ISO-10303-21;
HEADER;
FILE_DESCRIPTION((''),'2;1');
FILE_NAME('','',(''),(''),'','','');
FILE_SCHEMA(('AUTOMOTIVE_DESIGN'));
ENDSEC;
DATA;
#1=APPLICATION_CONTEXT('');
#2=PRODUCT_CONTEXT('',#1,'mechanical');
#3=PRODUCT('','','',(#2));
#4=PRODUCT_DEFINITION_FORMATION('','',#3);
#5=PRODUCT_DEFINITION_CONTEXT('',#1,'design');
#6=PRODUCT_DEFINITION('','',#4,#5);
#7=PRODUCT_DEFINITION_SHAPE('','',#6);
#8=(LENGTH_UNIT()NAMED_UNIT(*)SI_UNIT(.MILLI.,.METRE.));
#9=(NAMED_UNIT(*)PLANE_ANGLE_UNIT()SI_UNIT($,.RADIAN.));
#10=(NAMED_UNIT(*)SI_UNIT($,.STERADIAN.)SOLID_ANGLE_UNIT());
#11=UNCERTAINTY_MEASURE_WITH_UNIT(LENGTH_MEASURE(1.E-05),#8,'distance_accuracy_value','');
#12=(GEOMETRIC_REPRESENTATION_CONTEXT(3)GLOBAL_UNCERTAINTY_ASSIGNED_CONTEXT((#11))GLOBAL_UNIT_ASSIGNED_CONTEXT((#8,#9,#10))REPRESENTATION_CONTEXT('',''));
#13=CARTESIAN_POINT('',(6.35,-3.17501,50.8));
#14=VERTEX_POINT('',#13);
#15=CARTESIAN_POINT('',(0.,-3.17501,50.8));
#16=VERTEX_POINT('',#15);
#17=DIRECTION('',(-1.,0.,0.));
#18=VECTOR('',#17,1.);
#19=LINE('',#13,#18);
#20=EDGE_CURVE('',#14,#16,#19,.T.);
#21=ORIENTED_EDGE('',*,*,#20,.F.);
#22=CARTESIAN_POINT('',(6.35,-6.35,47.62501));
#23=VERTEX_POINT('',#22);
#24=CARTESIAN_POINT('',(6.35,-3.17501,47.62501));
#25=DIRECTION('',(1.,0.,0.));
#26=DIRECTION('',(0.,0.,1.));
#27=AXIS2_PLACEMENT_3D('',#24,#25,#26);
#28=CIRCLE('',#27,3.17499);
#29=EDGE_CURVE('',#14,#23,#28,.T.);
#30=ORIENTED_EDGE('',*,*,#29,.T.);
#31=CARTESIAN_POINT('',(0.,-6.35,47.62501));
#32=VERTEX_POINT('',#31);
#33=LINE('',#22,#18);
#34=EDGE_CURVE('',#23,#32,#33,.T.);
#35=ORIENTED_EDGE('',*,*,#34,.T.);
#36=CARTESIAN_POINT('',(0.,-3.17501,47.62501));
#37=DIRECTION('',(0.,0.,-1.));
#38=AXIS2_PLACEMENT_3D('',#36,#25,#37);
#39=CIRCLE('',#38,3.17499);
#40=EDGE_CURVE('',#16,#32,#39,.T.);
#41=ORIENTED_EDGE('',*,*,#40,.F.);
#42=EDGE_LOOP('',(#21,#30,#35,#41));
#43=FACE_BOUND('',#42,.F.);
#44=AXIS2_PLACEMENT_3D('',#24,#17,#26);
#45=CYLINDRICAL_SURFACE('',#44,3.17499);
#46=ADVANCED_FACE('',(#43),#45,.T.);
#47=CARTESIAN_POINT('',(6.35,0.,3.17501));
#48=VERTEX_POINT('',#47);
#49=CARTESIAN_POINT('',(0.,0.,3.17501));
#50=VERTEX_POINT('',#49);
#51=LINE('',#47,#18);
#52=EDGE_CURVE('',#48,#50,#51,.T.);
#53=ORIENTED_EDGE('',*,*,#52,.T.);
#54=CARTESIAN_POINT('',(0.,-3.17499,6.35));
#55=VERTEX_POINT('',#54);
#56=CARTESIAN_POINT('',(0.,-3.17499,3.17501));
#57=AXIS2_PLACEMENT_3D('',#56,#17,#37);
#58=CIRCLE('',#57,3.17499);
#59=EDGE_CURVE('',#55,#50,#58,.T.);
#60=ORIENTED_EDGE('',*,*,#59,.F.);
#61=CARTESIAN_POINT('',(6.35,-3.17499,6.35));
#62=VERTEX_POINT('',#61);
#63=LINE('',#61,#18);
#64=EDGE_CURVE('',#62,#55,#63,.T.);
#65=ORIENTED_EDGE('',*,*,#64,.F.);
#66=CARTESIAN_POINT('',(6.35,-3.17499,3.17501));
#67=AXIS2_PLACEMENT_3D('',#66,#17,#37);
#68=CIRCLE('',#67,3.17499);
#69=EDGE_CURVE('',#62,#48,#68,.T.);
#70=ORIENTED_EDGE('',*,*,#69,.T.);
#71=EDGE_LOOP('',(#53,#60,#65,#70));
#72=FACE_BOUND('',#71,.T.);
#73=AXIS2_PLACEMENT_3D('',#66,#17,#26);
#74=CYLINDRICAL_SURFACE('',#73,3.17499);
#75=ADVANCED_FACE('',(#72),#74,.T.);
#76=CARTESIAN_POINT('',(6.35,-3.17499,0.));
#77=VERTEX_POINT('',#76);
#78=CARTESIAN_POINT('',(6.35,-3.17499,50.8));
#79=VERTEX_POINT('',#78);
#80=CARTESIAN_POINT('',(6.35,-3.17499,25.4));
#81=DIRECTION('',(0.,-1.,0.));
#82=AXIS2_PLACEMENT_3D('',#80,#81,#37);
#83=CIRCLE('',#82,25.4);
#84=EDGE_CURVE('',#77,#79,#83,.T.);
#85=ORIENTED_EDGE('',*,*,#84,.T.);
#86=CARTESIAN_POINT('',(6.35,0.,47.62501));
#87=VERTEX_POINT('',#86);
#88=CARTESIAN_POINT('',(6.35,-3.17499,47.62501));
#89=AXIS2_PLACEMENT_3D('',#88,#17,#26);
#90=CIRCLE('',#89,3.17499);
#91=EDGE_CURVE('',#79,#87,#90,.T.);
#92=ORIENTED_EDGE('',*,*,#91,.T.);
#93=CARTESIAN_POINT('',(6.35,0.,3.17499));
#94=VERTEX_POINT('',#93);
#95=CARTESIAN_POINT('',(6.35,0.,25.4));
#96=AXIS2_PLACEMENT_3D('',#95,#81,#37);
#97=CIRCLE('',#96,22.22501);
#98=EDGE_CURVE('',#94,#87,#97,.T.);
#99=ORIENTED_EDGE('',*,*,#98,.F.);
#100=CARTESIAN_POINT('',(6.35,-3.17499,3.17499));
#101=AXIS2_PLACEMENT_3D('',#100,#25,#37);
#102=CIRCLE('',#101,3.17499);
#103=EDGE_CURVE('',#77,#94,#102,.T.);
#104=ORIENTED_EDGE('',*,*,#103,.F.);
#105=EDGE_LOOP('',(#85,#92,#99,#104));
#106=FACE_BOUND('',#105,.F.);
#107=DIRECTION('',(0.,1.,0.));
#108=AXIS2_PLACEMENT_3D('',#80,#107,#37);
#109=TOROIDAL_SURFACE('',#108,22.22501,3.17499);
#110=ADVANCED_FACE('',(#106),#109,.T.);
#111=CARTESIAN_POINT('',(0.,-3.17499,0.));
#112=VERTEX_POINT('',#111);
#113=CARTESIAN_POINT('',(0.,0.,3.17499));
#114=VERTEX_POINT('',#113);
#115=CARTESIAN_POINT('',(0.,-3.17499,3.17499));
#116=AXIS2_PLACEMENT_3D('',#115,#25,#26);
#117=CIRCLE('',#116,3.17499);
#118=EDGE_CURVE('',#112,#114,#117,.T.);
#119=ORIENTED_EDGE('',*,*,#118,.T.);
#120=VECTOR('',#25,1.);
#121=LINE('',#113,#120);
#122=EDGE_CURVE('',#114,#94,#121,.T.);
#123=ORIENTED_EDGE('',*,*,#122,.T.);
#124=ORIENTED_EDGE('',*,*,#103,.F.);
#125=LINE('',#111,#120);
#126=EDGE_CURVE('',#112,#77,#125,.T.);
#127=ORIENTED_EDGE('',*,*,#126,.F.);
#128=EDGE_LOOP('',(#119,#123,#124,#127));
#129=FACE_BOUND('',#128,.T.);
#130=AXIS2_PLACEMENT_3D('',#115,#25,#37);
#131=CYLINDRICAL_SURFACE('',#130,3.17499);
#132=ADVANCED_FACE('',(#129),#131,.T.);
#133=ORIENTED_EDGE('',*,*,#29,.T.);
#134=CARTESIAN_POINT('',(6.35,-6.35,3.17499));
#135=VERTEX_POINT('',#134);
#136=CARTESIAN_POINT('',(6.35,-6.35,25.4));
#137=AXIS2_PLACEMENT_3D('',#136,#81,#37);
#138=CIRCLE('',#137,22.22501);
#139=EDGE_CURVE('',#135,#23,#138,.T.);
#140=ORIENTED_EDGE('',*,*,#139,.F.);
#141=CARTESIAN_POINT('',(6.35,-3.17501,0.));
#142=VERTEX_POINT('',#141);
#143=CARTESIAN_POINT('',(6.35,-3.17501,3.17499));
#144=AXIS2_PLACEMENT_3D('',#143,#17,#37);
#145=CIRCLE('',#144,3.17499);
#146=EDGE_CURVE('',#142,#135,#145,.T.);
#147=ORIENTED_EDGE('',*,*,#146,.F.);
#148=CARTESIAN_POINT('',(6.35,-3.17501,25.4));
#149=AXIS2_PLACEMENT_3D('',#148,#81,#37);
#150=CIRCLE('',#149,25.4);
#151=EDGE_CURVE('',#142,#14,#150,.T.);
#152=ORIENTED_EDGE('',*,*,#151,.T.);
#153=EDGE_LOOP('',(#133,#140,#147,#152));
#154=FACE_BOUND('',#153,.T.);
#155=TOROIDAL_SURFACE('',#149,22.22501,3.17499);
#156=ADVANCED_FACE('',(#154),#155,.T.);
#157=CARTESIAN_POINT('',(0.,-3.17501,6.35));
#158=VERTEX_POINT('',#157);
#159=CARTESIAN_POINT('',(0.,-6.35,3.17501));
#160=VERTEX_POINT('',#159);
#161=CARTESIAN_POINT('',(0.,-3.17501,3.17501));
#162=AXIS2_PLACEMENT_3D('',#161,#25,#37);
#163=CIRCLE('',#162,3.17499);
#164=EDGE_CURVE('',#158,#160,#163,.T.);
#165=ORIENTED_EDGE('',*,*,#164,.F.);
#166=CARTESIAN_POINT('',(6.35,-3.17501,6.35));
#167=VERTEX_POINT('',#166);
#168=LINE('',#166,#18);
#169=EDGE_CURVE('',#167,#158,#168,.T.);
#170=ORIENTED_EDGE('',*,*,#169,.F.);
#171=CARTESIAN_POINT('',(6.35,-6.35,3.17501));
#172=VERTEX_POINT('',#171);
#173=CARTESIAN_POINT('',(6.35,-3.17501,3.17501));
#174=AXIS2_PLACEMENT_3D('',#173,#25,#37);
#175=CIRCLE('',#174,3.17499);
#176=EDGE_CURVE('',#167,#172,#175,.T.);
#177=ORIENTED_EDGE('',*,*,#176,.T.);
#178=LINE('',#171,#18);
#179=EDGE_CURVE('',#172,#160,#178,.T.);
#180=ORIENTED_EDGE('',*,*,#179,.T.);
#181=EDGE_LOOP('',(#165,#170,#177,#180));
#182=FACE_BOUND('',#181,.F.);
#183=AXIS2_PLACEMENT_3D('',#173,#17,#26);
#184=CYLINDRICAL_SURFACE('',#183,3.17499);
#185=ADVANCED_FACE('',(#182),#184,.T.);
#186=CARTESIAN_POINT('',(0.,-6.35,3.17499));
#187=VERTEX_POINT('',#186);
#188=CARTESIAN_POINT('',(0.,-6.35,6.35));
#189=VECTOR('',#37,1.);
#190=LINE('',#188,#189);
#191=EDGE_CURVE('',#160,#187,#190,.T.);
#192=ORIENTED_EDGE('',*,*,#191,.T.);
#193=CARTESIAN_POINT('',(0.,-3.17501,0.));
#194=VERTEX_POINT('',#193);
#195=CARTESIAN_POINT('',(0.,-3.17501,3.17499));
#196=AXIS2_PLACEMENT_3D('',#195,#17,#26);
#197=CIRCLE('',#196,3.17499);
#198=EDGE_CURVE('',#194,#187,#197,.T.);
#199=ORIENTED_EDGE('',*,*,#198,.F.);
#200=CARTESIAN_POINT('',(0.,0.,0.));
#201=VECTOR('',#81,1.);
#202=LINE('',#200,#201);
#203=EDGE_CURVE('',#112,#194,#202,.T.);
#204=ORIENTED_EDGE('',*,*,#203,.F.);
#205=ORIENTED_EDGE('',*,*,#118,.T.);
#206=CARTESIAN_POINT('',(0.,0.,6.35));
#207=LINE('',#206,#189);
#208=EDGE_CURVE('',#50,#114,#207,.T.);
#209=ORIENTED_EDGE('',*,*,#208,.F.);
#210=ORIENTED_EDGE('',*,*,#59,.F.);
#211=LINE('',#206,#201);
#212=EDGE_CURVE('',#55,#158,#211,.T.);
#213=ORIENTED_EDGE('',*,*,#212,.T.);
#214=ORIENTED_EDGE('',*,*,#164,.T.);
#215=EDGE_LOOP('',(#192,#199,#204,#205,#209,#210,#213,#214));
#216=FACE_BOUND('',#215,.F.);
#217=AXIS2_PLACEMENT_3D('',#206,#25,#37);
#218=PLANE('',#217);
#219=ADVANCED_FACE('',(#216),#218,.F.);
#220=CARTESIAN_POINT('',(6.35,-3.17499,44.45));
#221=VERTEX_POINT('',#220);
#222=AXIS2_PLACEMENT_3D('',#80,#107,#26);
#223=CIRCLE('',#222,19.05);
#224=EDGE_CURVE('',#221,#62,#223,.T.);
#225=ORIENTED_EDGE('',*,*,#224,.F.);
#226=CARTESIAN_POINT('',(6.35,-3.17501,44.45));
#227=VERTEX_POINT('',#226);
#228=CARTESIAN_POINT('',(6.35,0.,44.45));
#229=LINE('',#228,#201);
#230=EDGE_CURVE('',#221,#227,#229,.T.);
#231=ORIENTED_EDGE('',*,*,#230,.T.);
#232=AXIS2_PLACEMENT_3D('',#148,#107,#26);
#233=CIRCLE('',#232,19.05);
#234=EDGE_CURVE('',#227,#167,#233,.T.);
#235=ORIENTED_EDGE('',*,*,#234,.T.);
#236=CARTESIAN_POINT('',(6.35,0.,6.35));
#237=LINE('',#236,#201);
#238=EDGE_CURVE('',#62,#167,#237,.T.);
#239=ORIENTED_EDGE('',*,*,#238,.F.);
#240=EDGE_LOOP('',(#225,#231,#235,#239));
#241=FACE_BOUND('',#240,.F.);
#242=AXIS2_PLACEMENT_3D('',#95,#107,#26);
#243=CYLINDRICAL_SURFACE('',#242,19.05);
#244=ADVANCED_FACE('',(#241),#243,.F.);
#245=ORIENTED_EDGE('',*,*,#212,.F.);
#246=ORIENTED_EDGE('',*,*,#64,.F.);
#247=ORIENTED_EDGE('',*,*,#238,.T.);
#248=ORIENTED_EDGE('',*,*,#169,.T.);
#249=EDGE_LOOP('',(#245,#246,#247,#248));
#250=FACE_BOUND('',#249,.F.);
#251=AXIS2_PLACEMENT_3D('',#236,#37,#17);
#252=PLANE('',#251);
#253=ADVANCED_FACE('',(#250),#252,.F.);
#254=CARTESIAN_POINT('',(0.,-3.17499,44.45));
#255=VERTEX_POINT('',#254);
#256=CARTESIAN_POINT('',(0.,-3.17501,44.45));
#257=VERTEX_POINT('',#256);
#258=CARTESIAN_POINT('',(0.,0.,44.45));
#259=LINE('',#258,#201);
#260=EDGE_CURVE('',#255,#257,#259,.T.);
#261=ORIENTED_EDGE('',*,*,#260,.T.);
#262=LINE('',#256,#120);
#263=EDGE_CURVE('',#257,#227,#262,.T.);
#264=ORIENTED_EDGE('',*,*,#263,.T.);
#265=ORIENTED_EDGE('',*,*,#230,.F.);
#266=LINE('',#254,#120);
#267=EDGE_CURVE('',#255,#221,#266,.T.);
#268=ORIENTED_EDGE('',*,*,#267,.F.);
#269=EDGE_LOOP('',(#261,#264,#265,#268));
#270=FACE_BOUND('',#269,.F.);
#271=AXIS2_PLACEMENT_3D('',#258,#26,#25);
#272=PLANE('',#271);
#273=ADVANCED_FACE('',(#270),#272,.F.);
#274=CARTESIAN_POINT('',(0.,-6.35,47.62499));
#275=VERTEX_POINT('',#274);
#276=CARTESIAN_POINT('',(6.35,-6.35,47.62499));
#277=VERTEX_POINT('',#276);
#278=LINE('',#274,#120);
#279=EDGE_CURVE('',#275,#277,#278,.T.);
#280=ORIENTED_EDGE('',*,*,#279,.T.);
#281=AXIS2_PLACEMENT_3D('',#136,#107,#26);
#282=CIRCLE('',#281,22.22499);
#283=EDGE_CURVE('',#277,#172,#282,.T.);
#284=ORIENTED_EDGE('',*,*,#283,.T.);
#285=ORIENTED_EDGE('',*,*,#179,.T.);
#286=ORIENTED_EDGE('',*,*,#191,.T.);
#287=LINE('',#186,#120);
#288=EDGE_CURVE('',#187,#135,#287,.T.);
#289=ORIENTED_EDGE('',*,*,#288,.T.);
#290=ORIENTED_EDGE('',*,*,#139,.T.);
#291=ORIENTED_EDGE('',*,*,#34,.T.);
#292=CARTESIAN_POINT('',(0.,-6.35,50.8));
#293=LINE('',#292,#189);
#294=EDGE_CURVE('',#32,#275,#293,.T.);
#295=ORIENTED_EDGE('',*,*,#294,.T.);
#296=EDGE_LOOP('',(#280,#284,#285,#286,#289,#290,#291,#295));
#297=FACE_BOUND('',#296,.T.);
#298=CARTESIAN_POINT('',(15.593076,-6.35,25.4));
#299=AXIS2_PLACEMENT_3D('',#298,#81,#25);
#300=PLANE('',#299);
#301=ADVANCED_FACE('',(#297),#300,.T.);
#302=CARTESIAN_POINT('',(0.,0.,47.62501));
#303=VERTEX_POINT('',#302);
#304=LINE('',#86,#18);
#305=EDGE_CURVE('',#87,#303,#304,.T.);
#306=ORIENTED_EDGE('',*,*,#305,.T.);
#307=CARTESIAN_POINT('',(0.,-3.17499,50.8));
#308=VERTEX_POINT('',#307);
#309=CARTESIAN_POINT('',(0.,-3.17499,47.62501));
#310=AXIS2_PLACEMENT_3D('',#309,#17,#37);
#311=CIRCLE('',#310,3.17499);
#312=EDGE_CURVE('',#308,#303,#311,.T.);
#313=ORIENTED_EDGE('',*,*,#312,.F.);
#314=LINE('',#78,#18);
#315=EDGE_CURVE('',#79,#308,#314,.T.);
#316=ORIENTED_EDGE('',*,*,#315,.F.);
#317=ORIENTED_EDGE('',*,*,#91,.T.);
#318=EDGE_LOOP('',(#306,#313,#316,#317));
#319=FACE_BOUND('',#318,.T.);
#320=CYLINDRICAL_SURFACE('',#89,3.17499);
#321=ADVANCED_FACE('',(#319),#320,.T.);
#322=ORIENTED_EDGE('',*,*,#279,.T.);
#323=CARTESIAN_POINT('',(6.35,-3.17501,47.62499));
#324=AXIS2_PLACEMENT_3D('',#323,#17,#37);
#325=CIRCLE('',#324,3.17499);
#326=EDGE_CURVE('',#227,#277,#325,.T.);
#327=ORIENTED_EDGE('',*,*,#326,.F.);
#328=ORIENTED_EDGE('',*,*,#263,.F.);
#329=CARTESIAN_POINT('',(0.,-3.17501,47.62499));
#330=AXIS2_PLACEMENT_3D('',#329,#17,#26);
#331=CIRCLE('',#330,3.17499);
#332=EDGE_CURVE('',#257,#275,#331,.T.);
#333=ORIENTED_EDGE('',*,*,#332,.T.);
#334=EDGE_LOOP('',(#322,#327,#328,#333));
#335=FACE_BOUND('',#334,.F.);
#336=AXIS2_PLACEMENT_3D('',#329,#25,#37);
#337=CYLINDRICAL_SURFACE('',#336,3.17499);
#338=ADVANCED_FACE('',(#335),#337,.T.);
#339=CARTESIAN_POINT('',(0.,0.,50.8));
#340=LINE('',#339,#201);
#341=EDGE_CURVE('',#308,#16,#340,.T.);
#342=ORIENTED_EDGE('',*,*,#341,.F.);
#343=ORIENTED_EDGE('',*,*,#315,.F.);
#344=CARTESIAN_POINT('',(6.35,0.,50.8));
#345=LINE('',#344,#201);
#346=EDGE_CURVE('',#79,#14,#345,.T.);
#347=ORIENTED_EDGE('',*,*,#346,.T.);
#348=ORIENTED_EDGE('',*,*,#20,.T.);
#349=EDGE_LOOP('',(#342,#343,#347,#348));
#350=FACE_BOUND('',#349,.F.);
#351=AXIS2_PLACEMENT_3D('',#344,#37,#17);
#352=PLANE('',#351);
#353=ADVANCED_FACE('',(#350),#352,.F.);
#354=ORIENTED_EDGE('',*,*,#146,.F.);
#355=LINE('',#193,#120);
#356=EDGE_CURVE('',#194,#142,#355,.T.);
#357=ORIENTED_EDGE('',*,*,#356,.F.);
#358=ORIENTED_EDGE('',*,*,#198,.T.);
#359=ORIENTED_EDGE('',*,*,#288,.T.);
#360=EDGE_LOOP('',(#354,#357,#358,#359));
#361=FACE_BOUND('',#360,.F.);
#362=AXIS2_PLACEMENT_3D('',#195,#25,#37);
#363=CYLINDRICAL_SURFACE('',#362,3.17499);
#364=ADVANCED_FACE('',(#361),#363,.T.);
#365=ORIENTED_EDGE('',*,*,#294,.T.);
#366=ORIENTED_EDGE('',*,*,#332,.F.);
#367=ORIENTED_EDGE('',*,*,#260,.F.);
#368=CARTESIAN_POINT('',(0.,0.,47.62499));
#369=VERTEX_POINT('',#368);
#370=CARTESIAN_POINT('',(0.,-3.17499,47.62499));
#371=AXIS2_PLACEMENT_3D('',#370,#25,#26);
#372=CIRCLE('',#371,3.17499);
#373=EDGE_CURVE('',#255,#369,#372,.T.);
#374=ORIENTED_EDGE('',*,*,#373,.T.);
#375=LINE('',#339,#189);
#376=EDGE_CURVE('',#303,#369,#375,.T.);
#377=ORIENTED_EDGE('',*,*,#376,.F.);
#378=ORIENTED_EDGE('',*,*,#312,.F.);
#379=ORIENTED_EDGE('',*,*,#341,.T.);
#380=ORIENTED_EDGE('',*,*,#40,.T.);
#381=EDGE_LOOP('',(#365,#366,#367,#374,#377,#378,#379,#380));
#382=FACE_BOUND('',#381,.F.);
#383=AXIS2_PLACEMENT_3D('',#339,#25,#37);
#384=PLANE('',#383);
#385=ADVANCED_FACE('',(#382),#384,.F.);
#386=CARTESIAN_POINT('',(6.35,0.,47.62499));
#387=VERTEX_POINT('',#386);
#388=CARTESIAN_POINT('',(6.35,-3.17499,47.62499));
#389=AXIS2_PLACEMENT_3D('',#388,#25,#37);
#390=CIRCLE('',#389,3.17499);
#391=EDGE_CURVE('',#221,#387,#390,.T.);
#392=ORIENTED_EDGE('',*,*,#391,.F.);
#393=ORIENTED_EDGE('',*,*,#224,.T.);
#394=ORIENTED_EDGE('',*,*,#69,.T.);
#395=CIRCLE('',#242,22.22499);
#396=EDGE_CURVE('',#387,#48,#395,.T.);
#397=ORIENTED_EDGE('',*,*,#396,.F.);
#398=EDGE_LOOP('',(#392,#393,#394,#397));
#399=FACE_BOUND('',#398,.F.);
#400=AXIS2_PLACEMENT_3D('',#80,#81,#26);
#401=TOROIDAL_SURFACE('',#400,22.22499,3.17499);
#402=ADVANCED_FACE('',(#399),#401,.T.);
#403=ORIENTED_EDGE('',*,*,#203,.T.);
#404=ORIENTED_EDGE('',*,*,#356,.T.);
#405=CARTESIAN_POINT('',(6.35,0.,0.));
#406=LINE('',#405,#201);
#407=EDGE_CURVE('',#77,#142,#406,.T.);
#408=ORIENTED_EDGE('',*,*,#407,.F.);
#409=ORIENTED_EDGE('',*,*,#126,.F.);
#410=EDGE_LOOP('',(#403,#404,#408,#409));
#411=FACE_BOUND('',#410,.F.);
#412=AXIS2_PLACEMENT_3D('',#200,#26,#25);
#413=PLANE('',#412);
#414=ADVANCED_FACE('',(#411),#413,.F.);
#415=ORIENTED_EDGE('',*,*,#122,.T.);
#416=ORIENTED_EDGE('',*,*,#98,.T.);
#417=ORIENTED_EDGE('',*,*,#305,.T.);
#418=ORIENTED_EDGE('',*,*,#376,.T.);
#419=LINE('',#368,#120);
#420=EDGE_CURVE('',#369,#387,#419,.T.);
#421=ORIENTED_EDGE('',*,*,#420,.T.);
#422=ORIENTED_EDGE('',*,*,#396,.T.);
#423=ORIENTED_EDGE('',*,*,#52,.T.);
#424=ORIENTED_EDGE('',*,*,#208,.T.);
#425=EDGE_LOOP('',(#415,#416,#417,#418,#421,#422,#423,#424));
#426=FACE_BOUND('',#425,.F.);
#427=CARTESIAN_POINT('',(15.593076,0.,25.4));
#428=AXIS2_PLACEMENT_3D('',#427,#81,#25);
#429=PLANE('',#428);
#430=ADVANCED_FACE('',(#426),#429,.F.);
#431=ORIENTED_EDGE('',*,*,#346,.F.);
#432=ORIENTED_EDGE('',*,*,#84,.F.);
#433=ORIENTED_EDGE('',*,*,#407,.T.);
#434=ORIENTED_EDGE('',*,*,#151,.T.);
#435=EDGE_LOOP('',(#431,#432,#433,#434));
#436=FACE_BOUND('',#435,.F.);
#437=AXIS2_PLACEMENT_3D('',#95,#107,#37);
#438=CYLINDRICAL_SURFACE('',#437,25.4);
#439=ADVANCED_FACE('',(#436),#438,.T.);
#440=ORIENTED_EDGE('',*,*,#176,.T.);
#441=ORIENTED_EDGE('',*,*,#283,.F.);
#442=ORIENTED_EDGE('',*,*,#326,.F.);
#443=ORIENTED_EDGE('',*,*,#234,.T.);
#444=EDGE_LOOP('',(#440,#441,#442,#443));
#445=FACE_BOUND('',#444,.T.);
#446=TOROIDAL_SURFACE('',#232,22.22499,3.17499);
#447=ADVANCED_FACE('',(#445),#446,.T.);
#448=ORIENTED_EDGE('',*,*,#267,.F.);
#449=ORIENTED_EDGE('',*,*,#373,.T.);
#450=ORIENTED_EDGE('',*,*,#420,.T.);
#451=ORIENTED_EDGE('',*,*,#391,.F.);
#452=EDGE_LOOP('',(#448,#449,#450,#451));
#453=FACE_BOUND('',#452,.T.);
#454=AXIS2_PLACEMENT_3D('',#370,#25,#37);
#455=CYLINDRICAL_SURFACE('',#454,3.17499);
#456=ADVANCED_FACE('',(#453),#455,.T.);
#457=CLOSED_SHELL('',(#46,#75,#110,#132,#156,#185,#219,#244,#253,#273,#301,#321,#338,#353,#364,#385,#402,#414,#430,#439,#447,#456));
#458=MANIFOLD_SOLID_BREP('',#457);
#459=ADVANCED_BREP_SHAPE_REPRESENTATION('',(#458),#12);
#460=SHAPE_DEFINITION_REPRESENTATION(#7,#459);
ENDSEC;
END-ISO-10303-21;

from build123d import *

# Parameters (mm, degrees)
F1_DEPTH = 6.35
F2_R     = 3.17499


# Not quite as in the source:
# - a fillet or chamfer is up to 0.001 mm smaller than in the source, because OpenCascade refuses the exact size


with BuildPart() as f1:
    # F0 (on Front) → F1 (new body)
    with BuildSketch(Plane.XZ):
        with BuildLine():
            Line((0, 6.350000307), (0, 0))
            Line((0, 0), (6.35, 0))
            ThreePointArc((6.35, 0), (31.75, 25.4), (6.35, 50.8))
            Line((6.35, 50.8), (0, 50.8))
            Line((0, 50.8), (0, 44.449999693))
            Line((0, 44.449999693), (6.35, 44.449999693))
            ThreePointArc((6.35, 44.449999693), (25.399999693, 25.4), (6.35, 6.350000307))
            Line((6.35, 6.350000307), (0, 6.350000307))
        make_face()
    extrude(amount=F1_DEPTH)

    # F2 (radius 3.175 in the source; OpenCascade refuses exactly that, so slightly less here)
    f2_edges = [f1.edges().sort_by_distance(p)[0] for p in [
        (31.75, -6.35, 25.4),
        (25.4, -6.35, 25.4),
        (31.75, 0, 25.4),
        (3.175, 0, 6.35),
    ]]
    fillet(f2_edges, radius=F2_R)


solid = f1.part
